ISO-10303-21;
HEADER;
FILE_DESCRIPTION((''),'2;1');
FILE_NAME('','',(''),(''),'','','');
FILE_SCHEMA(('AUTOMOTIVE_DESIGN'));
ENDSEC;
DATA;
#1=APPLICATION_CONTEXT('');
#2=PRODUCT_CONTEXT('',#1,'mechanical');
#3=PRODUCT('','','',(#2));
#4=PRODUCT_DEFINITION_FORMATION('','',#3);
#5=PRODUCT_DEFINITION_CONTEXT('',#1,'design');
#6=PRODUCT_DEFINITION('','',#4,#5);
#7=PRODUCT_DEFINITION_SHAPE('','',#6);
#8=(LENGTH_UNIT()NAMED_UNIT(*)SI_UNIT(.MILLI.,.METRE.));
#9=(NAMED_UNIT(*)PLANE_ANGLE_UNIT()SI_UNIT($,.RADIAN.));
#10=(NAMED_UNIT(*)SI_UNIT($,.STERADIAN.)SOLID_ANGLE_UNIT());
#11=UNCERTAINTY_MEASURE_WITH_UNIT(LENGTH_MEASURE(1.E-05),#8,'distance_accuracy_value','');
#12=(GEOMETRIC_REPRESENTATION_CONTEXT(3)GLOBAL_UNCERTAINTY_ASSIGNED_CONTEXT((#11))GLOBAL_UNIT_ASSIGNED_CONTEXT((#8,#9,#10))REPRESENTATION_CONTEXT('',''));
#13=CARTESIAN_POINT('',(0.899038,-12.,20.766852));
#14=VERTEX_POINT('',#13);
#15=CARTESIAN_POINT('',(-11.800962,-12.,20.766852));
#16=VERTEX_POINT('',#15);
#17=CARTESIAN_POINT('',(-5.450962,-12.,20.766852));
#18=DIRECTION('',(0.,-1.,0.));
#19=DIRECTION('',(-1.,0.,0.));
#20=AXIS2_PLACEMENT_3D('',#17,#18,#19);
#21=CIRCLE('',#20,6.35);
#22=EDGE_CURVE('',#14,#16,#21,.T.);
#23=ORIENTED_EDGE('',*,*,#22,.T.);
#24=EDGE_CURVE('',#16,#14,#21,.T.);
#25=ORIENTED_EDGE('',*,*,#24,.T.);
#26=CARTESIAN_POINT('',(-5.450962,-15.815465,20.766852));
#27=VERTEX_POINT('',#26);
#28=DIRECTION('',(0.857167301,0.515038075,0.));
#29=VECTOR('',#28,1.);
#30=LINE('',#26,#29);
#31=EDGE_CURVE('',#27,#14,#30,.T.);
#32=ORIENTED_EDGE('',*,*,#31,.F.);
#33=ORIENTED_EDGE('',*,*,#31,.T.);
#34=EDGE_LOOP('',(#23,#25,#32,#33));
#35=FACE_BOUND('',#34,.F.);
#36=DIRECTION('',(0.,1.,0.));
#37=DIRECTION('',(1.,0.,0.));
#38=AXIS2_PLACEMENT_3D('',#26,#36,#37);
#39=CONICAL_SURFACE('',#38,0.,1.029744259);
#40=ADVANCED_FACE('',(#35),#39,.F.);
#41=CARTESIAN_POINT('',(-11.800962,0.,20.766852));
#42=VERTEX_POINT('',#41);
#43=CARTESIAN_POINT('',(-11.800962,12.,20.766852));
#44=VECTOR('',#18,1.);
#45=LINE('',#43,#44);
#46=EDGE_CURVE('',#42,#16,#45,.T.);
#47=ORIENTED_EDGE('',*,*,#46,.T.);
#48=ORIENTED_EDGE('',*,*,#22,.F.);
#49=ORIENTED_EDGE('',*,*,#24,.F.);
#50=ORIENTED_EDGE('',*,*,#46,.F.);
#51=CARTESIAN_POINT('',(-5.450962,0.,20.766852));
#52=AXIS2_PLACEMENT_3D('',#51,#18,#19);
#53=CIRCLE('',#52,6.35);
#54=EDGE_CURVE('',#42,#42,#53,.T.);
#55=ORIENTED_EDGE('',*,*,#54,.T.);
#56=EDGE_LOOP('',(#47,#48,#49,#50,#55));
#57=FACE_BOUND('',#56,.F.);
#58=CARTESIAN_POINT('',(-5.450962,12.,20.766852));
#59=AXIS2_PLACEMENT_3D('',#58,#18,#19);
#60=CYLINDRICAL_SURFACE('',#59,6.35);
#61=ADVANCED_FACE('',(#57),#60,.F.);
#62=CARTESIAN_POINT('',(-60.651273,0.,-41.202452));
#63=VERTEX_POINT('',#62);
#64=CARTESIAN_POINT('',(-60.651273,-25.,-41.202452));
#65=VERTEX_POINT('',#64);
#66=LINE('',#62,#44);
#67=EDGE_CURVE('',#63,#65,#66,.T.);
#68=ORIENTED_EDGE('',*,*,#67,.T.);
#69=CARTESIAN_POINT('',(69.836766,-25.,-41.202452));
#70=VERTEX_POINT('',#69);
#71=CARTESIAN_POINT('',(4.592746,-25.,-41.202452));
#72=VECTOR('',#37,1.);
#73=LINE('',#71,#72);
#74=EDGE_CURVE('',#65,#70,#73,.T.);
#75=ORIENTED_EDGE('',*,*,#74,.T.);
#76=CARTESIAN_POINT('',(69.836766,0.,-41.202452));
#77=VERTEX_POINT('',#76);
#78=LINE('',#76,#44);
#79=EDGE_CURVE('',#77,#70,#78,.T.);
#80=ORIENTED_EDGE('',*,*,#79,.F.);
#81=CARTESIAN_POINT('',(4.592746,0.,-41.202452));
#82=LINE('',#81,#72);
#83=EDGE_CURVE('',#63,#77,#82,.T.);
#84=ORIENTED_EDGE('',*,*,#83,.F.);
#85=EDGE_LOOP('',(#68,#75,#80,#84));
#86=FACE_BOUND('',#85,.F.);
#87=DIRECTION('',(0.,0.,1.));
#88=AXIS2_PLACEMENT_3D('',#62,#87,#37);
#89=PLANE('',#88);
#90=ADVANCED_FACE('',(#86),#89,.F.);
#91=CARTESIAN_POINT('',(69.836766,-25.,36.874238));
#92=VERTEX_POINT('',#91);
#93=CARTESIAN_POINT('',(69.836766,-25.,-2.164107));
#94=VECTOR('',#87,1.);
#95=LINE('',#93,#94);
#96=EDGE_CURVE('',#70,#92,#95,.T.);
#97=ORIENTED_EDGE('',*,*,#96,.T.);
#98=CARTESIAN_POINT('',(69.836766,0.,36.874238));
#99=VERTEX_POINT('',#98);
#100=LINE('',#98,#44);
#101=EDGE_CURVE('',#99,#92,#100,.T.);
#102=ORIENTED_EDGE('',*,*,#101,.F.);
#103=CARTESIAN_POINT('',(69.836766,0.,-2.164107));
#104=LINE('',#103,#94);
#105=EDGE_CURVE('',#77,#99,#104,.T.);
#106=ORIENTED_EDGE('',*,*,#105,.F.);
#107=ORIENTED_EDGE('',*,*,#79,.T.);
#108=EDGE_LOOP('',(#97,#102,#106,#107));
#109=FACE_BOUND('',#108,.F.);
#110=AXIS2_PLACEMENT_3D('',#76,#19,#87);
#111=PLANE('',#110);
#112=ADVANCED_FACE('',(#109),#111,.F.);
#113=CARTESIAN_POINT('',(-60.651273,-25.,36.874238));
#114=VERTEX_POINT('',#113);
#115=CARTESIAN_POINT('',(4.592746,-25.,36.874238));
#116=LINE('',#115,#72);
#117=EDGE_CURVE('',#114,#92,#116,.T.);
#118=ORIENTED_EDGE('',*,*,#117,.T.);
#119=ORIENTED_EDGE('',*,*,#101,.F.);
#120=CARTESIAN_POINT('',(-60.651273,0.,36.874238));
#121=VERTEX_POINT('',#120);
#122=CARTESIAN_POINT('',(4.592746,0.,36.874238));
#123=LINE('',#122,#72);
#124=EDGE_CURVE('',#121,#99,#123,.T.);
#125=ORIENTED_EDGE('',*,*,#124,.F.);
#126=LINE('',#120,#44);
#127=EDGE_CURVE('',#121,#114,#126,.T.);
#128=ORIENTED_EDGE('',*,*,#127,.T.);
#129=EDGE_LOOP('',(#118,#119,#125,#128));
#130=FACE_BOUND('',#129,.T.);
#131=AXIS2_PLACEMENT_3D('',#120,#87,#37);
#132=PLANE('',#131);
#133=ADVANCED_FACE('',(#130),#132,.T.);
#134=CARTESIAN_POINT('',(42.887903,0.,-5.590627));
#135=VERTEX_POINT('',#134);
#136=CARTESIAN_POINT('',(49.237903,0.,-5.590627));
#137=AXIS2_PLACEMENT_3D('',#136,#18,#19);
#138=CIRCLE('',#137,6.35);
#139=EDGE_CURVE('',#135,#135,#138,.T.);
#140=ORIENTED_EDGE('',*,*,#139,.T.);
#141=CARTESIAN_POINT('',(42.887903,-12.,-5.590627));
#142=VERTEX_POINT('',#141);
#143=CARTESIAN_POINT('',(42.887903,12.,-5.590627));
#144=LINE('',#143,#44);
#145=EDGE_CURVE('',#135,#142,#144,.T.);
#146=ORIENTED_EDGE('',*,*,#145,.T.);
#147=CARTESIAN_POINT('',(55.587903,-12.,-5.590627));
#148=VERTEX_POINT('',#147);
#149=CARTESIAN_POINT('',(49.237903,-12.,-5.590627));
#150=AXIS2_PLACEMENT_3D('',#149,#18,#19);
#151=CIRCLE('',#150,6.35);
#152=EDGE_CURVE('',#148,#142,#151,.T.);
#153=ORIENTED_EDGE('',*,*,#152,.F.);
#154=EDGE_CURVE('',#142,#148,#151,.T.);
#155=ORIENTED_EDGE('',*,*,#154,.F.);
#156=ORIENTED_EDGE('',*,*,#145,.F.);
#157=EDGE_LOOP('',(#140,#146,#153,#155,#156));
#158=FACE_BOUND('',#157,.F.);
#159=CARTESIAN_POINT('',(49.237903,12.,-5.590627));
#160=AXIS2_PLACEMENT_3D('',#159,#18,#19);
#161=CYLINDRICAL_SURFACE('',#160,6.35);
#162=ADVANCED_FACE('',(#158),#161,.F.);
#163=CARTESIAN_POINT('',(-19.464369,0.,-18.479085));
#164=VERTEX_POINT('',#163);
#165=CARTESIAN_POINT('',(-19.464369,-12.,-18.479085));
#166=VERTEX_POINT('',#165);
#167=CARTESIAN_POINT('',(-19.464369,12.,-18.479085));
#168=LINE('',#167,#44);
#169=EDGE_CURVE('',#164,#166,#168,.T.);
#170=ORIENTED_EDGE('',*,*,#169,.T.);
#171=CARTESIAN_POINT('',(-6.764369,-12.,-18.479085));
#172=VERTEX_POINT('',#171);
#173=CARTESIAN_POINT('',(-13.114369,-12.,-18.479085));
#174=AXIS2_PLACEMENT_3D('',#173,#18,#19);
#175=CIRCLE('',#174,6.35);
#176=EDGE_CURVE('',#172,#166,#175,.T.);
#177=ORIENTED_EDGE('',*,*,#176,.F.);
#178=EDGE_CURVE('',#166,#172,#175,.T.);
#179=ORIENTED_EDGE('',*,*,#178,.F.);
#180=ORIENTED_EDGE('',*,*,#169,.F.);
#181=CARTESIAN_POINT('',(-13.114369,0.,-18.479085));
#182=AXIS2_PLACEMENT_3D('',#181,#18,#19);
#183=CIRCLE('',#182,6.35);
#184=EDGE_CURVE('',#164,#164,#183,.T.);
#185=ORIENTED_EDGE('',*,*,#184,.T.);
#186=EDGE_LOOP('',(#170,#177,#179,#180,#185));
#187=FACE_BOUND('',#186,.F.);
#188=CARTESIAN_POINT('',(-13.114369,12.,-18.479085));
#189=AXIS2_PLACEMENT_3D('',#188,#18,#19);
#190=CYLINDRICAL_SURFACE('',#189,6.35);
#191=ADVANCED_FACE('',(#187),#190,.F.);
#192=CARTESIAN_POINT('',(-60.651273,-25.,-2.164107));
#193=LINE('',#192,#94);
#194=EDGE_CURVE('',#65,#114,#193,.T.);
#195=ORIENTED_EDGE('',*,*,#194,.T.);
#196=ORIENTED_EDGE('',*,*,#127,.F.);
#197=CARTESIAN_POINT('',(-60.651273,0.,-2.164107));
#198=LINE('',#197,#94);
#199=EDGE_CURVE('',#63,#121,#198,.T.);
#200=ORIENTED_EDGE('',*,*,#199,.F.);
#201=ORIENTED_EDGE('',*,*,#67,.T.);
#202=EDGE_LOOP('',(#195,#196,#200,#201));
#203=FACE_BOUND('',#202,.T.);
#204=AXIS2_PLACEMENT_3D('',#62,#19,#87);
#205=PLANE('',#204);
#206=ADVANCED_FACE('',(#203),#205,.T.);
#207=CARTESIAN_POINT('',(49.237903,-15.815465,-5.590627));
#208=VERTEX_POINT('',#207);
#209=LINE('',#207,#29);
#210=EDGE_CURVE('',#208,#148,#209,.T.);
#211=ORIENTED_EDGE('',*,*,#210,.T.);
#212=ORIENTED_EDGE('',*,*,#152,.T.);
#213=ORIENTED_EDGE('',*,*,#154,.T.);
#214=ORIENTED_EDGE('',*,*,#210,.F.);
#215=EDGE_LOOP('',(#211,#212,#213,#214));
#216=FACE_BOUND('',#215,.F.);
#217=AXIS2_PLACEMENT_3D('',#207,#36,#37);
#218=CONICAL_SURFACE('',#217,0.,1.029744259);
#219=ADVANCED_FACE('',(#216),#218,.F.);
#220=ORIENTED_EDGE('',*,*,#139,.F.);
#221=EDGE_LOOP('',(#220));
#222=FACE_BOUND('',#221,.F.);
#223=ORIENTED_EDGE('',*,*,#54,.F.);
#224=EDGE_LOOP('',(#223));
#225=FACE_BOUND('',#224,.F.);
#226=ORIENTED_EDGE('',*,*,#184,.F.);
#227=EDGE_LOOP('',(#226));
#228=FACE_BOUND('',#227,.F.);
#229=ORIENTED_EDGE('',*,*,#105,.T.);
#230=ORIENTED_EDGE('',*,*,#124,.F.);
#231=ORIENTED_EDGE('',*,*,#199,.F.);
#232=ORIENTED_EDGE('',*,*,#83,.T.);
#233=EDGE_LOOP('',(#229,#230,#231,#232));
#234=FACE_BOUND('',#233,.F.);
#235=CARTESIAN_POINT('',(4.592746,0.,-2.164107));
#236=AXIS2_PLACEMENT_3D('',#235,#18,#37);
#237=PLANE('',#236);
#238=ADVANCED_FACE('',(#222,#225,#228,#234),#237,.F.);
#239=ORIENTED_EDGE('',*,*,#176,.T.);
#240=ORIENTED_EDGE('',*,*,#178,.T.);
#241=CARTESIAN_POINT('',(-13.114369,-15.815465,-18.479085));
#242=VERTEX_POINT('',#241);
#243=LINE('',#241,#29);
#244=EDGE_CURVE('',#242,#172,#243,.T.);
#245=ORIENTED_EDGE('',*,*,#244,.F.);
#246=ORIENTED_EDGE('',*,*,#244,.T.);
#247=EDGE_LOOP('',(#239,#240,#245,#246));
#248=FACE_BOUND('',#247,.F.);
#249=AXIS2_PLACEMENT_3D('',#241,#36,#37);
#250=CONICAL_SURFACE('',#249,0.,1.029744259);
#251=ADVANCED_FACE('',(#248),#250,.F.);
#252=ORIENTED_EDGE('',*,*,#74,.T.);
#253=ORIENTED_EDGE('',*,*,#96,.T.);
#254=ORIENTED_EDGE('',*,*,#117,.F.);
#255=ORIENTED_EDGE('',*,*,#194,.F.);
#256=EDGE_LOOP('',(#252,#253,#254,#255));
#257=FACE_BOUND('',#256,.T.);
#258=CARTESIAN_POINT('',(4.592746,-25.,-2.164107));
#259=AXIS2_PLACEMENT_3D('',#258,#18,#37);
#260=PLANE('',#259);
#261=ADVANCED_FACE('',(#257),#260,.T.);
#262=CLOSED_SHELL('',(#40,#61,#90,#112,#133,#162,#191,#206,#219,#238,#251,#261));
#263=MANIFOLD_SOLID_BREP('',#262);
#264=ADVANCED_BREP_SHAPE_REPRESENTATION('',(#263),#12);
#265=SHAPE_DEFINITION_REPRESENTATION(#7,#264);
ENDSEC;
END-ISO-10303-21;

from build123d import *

# Parameters (mm, degrees)
F0_W     = 130.488038063
F0_H     = 78.0766904354
F1_DEPTH = 25
F3_D     = 12.7
F3_DEPTH = 12
F3_TIP   = 3.8154649308


# Not quite as in the source:
# - a length typed as a fraction of an inch, garbled in the dataset ("3 / 203.2 mm" for 3/8 in), is restored


with BuildPart() as f1:
    # F0 (on Front) → F1 (new body)
    with BuildSketch(Plane.XZ):
        with Locations((4.5927464962, -2.1641068161)):
            Rectangle(F0_W, F0_H)
    extrude(amount=F1_DEPTH)

    # F3
    with Locations(Plane(origin=(0, 0, 0), x_dir=(1, 0, 0), z_dir=(0, 1, 0))):
        with Locations((-13.1143694744, 18.479084596), (-5.4509616457, -20.7668524235), (49.2379032075, 5.5906269699)):
            Hole(F3_D / 2, depth=F3_DEPTH)
            with Locations((0, 0, -(F3_DEPTH + F3_TIP / 2))):  # 118° drill point
                Cone(0, F3_D / 2, F3_TIP, mode=Mode.SUBTRACT)


solid = f1.part
